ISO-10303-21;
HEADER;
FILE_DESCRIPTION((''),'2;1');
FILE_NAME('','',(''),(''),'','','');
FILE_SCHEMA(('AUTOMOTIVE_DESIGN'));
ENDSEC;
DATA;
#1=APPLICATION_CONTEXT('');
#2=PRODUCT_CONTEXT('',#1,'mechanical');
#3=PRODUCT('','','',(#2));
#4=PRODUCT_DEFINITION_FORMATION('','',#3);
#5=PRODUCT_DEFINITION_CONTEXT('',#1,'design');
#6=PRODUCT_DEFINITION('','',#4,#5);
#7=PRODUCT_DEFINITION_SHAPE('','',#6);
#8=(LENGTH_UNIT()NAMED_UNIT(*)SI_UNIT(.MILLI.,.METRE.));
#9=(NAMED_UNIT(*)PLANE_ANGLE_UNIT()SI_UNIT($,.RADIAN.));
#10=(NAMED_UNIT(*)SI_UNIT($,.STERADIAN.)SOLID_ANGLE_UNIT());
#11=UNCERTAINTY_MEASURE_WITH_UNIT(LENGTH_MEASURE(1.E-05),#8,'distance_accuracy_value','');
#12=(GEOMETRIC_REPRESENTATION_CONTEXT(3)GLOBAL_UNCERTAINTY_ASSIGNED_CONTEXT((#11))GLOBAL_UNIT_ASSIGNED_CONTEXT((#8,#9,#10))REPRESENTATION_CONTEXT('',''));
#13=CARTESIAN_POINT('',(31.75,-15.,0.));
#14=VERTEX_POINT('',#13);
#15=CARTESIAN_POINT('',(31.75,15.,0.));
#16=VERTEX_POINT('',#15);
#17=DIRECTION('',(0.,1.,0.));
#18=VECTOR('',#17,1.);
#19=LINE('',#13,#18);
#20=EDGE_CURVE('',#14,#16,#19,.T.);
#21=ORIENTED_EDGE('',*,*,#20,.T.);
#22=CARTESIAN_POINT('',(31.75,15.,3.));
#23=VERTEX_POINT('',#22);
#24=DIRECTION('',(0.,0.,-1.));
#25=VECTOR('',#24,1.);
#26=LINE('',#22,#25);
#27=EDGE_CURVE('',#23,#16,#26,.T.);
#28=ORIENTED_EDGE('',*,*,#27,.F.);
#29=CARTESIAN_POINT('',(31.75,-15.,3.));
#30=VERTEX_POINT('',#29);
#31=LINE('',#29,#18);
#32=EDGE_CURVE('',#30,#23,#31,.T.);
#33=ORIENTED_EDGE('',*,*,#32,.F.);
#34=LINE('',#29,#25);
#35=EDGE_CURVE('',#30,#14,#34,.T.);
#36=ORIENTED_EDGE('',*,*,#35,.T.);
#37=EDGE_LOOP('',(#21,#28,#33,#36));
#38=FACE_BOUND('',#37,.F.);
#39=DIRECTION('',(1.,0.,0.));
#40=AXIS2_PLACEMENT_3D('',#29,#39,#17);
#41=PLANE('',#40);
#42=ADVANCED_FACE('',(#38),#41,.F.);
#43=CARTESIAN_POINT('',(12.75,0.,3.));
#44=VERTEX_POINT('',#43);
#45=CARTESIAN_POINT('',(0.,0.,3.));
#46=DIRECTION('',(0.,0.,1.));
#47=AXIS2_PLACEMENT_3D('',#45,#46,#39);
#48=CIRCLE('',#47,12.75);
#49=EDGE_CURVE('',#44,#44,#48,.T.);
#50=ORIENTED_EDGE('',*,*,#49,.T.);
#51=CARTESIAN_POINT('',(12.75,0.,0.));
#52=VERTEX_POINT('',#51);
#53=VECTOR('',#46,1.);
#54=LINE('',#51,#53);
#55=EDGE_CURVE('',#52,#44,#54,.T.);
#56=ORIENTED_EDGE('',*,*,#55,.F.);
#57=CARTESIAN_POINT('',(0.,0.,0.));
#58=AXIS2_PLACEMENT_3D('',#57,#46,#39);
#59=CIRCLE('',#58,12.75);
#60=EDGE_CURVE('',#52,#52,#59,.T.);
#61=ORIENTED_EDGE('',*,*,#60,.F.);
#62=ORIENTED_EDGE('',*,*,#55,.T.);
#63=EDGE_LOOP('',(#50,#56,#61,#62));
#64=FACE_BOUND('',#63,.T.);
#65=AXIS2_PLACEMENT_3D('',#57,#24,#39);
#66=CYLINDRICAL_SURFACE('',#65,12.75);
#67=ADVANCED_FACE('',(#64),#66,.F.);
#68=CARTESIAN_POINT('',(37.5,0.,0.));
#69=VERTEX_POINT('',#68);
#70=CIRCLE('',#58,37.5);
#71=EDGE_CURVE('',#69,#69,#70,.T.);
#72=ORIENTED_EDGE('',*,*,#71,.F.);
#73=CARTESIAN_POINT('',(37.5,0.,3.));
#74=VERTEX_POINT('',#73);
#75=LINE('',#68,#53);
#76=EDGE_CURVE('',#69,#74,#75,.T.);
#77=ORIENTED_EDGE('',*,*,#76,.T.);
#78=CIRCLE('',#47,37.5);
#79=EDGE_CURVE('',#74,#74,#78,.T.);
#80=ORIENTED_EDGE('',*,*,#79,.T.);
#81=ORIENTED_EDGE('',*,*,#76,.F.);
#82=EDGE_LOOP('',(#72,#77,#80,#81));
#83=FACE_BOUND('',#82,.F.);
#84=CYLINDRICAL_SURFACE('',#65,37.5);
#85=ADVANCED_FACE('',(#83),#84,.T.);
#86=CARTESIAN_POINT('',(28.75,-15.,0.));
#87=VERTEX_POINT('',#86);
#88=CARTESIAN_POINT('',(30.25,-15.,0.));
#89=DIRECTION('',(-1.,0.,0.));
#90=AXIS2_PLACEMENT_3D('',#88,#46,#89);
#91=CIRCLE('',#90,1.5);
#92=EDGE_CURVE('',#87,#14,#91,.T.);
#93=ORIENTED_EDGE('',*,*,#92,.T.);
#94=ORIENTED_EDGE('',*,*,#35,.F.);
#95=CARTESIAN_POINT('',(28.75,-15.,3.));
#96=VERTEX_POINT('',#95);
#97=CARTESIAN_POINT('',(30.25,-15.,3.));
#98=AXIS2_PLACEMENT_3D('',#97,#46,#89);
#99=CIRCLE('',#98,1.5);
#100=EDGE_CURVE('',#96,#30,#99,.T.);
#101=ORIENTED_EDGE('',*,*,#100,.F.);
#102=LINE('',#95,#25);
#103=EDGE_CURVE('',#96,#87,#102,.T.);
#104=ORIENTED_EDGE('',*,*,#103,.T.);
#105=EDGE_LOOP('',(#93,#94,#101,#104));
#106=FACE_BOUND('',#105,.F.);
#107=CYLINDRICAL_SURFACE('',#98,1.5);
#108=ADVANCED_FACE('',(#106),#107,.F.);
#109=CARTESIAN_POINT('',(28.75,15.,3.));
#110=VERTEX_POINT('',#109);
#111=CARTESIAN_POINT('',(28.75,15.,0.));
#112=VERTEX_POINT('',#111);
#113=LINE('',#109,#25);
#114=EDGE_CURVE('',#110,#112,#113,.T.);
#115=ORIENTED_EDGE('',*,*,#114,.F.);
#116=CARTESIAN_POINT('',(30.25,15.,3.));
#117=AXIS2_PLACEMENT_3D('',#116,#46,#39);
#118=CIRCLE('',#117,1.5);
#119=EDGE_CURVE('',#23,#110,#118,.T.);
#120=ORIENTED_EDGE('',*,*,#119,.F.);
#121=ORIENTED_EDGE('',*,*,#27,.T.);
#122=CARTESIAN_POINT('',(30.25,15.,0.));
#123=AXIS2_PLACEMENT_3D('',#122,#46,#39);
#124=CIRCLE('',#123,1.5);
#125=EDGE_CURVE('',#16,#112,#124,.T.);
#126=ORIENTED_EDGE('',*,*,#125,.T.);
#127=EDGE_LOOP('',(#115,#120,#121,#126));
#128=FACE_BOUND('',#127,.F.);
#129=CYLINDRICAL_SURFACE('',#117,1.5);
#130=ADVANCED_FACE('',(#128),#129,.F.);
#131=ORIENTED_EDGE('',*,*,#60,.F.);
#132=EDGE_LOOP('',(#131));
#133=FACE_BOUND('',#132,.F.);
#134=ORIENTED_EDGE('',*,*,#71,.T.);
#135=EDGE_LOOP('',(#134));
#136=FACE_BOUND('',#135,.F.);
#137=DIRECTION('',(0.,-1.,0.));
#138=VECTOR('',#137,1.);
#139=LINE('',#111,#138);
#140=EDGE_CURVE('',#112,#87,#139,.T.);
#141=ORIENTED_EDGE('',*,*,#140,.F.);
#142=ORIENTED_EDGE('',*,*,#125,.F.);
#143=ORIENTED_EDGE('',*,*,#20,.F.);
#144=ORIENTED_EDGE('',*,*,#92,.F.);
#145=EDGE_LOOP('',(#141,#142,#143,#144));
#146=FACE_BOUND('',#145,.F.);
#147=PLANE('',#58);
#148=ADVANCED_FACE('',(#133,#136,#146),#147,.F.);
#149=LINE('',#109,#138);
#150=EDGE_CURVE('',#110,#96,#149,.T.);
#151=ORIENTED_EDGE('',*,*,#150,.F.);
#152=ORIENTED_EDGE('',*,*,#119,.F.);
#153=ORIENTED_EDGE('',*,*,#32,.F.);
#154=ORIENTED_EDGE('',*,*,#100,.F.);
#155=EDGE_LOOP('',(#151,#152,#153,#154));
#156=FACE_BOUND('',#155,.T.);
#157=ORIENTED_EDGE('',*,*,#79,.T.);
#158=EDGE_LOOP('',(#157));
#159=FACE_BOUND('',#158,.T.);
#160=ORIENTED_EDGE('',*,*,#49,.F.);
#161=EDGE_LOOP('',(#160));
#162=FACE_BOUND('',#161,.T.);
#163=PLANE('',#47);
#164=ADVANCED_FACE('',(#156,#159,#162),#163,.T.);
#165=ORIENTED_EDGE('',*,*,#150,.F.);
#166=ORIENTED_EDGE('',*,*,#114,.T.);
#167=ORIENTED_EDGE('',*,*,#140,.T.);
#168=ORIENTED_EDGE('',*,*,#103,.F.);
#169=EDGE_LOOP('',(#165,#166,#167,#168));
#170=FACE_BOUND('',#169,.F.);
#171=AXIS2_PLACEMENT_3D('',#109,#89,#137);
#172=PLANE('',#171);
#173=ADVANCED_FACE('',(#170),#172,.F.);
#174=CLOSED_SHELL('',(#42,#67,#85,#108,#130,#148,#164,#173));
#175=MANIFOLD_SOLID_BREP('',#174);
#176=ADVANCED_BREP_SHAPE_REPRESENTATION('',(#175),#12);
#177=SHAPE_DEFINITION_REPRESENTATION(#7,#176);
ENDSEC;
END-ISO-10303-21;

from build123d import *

# Parameters (mm, degrees)
F0_R     = 37.5
F0_R_2   = 12.75
F1_DEPTH = 3
F3_DEPTH = 3


# Not quite as in the source:
# - a feature names something its author has since deleted; it is built from what else it names


with BuildPart() as f1:
    # F0 (on Top) → F1 (new body)
    with BuildSketch(Plane.XY):
        Circle(F0_R)
        Circle(F0_R_2, mode=Mode.SUBTRACT)
    extrude(amount=F1_DEPTH)

    # F2 (on face) → F3 (cut, through all)
    with BuildSketch(Plane.XY.offset(3)):
        with BuildLine():
            Line((31.75, -15), (31.75, 15))
            ThreePointArc((31.75, 15), (30.25, 16.5), (28.75, 15))
            Line((28.75, 15), (28.75, -15))
            ThreePointArc((28.75, -15), (30.25, -16.5), (31.75, -15))
        make_face()
    extrude(amount=-F3_DEPTH, mode=Mode.SUBTRACT)


solid = f1.part
